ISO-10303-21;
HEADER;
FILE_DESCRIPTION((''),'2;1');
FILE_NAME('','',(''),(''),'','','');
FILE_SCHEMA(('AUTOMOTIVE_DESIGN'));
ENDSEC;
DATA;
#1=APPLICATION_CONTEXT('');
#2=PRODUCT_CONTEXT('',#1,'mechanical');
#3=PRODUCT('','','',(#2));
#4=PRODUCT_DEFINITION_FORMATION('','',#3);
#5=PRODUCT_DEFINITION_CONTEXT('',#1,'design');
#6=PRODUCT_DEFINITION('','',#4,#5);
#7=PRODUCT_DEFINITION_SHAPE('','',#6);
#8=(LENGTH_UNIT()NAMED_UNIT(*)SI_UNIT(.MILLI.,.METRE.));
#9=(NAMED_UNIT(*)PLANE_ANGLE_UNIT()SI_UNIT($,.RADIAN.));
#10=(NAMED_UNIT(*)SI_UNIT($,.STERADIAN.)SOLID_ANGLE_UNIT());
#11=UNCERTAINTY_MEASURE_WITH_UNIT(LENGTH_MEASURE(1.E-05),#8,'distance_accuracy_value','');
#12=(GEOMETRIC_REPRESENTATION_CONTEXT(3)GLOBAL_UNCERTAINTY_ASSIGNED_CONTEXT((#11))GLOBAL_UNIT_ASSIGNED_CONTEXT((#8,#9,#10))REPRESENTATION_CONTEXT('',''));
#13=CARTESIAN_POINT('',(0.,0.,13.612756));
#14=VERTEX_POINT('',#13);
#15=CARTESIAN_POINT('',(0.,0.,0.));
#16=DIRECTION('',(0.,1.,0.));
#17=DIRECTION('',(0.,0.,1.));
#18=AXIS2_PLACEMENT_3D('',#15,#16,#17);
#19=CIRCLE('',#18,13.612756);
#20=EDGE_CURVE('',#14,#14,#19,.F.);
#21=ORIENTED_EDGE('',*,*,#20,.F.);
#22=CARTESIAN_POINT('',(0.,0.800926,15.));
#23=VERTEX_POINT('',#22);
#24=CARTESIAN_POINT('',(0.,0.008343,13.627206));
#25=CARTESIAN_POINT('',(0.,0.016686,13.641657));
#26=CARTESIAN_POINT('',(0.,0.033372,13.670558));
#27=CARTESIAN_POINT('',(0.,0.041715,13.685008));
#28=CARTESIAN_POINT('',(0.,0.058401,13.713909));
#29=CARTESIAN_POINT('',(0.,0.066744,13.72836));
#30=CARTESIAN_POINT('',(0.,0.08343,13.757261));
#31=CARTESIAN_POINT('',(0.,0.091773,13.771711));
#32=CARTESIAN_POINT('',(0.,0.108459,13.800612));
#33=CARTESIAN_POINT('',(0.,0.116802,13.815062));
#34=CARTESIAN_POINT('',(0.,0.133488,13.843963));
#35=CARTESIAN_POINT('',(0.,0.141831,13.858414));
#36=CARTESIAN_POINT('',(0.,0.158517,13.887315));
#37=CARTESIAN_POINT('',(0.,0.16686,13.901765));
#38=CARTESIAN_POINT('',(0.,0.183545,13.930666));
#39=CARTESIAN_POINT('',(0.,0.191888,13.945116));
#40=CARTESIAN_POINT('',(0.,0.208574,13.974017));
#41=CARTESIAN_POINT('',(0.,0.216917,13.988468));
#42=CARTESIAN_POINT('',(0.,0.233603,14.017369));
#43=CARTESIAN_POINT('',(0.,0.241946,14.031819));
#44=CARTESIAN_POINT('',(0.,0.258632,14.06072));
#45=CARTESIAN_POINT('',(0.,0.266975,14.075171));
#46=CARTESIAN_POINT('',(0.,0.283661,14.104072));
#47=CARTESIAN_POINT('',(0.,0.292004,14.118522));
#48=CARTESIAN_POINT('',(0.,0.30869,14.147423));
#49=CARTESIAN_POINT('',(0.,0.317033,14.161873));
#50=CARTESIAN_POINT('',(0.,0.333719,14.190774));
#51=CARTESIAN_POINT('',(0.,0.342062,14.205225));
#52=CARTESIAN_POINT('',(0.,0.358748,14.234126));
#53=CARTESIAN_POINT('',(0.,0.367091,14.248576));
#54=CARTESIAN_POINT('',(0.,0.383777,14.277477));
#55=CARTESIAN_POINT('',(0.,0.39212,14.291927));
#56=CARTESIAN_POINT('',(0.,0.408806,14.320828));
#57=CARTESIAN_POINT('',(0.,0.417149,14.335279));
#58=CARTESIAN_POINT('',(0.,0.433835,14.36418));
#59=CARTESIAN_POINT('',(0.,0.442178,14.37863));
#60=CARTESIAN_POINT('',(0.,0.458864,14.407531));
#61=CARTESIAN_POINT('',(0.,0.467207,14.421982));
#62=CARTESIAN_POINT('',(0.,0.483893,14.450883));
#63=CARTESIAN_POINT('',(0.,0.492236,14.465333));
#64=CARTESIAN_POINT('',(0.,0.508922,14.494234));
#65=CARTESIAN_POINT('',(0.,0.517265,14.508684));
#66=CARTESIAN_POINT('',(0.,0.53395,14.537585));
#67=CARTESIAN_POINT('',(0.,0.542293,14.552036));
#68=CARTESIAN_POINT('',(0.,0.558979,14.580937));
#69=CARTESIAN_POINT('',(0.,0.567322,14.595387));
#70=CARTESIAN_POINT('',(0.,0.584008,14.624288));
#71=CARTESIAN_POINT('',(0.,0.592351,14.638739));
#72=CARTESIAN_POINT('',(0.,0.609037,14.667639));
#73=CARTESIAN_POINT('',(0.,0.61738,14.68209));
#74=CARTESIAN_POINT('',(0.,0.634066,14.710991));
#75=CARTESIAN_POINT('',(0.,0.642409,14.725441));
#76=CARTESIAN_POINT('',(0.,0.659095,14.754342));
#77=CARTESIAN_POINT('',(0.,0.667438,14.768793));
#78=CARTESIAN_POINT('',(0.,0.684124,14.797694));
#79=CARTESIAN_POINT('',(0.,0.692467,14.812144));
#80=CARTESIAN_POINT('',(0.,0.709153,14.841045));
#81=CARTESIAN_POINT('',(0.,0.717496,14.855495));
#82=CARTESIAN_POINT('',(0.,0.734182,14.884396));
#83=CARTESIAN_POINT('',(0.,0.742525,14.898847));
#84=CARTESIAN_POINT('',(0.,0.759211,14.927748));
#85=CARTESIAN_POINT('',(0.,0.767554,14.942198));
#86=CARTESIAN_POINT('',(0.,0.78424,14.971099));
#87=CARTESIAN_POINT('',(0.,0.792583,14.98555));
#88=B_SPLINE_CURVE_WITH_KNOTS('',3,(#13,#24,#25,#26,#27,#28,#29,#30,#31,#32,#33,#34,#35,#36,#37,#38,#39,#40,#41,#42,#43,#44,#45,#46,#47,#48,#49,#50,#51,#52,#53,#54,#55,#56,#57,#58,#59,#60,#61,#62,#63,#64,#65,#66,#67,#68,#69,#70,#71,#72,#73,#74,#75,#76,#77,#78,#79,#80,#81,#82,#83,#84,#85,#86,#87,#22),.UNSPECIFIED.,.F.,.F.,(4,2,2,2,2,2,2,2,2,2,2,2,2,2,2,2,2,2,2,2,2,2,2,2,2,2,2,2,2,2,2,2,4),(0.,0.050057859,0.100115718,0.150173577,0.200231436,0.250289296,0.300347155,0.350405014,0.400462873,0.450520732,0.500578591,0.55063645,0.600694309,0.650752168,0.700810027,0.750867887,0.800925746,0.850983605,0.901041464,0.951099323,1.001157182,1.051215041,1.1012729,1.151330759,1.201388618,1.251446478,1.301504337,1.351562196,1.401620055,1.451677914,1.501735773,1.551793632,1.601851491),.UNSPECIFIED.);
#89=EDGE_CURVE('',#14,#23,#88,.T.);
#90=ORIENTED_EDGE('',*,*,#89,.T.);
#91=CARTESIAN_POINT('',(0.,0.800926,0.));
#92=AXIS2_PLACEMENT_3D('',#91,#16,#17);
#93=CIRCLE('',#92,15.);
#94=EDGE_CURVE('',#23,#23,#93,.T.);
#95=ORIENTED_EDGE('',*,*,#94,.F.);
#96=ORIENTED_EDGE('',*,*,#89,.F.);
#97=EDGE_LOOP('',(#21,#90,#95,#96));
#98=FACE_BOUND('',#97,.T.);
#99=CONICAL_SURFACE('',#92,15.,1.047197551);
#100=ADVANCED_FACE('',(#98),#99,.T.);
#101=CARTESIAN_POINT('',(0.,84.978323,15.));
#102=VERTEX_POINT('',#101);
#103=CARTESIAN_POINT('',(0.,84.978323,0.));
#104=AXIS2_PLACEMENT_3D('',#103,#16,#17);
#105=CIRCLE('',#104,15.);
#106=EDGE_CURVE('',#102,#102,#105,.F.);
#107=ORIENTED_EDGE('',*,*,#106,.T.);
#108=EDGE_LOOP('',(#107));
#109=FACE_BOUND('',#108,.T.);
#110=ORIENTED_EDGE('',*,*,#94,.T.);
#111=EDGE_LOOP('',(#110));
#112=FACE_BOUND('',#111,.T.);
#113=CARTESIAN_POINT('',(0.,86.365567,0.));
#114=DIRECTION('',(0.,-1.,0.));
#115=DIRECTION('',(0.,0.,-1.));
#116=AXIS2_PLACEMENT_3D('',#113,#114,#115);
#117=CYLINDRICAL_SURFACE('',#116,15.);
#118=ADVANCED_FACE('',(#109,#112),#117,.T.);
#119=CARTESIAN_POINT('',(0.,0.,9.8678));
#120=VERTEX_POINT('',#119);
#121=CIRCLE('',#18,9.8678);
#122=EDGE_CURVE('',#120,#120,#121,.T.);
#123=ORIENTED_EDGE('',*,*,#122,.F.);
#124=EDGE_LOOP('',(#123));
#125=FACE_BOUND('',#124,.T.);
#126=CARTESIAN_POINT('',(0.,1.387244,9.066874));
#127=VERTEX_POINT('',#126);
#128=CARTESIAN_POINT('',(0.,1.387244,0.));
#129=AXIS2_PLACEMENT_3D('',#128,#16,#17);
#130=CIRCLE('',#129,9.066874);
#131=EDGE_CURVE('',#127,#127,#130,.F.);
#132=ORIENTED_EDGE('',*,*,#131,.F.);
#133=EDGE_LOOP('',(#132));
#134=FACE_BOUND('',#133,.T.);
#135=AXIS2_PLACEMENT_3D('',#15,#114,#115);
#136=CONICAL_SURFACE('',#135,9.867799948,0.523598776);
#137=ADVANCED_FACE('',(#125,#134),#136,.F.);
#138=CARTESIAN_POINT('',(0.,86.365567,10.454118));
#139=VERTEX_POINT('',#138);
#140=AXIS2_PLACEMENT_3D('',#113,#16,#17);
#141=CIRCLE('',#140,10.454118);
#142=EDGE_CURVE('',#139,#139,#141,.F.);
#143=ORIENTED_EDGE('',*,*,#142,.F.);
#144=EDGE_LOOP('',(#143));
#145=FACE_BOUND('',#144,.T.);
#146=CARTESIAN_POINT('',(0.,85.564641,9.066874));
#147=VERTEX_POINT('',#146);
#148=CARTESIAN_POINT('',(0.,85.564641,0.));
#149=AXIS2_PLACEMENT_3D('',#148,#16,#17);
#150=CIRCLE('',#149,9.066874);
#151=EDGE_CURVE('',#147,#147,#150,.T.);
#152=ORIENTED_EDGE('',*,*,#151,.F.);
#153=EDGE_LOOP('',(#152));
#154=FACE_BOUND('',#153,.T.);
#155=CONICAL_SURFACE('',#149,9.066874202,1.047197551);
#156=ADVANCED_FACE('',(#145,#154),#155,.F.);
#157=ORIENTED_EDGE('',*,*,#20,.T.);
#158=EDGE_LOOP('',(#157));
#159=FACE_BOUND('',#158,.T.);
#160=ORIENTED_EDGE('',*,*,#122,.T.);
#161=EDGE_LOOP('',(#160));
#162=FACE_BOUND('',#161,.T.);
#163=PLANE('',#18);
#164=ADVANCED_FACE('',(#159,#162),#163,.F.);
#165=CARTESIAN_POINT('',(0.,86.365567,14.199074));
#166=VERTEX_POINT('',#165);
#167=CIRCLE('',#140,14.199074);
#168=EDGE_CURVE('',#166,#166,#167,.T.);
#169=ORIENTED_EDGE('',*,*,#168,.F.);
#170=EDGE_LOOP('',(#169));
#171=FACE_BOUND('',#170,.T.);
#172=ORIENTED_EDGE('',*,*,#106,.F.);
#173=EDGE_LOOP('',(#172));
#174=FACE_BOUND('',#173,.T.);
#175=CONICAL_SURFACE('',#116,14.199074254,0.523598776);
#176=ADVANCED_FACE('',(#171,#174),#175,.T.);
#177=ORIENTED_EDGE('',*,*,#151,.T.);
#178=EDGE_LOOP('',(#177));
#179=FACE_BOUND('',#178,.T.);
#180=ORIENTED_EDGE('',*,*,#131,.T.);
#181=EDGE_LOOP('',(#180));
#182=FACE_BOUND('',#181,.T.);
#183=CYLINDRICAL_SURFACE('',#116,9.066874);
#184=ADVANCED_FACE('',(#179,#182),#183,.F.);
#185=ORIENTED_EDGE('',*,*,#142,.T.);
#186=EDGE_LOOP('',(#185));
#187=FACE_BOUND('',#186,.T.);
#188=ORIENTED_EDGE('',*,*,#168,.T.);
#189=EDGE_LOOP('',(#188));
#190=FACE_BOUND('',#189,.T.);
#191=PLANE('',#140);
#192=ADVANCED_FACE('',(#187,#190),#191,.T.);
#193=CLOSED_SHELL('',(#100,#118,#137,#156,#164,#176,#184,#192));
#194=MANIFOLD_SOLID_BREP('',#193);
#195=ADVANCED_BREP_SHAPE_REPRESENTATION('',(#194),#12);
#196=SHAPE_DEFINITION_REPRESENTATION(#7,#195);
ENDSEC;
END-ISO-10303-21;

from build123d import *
from OCP.BRepFilletAPI import BRepFilletAPI_MakeChamfer

# Parameters (mm, degrees)
SKETCH1_R           = 15
BOSS_EXTRUDE1_DEPTH = 86.365566853
SKETCH2_R           = 9.066874202
CUT_EXTRUDE1_DEPTH  = 89.932621336
CHAMFER1_SIZE       = 1.387244085
CHAMFER1_SIZE2      = 0.800925746


with BuildPart() as part:
    # Sketch1 → Boss-Extrude1 (new body)
    with BuildSketch(Plane(origin=(0, 0, 0), x_dir=(1, 0, 0), z_dir=(0, 1, 0))):
        Circle(SKETCH1_R)
    extrude(amount=BOSS_EXTRUDE1_DEPTH)

    # Sketch2 → Cut-Extrude1 (cut, through all)
    with BuildSketch(Plane(origin=(0, 0, 0), x_dir=(1, 0, 0), z_dir=(0, 1, 0))):
        Circle(SKETCH2_R)
    extrude(amount=CUT_EXTRUDE1_DEPTH, mode=Mode.SUBTRACT)

    # Chamfer1: one chamfer whose edges measure the first distance from different faces: ONE call of the kernel's chamfer builder (chamfer() names one face for all edges)
    chamfer1_edges_1 = [part.edges().sort_by_distance(p)[0] for p in [
        (-9.066874202, 86.365566853, 0),
    ]]
    chamfer1_side_1 = [part.faces().sort_by_distance(p)[0] for p in [
        (-14.575735931, 86.365566853, 0),
    ]]
    chamfer1_edges_2 = [part.edges().sort_by_distance(p)[0] for p in [
        (-9.066874202, 0, 0),
    ]]
    chamfer1_side_2 = [part.faces().sort_by_distance(p)[0] for p in [
        (-9.066874202, 43.182783426, 0),
    ]]
    chamfer1_edges_3 = [part.edges().sort_by_distance(p)[0] for p in [
        (-15, 0, 0),
    ]]
    chamfer1_side_3 = [part.faces().sort_by_distance(p)[0] for p in [
        (-14.575735931, 0, 0),
    ]]
    chamfer1_edges_4 = [part.edges().sort_by_distance(p)[0] for p in [
        (-15, 86.365566853, 0),
    ]]
    chamfer1_side_4 = [part.faces().sort_by_distance(p)[0] for p in [
        (-15, 43.182783426, 0),
    ]]
    chamfer1 = BRepFilletAPI_MakeChamfer(part.part.solid().wrapped)
    for e in chamfer1_edges_1:
        chamfer1.Add(CHAMFER1_SIZE, CHAMFER1_SIZE2, e.wrapped, chamfer1_side_1[0].wrapped)  # the first distance lies on this face
    for e in chamfer1_edges_2:
        chamfer1.Add(CHAMFER1_SIZE, CHAMFER1_SIZE2, e.wrapped, chamfer1_side_2[0].wrapped)  # the first distance lies on this face
    for e in chamfer1_edges_3:
        chamfer1.Add(CHAMFER1_SIZE, CHAMFER1_SIZE2, e.wrapped, chamfer1_side_3[0].wrapped)  # the first distance lies on this face
    for e in chamfer1_edges_4:
        chamfer1.Add(CHAMFER1_SIZE, CHAMFER1_SIZE2, e.wrapped, chamfer1_side_4[0].wrapped)  # the first distance lies on this face
    add(Compound.cast(chamfer1.Shape()), mode=Mode.REPLACE)


solid = part.part
